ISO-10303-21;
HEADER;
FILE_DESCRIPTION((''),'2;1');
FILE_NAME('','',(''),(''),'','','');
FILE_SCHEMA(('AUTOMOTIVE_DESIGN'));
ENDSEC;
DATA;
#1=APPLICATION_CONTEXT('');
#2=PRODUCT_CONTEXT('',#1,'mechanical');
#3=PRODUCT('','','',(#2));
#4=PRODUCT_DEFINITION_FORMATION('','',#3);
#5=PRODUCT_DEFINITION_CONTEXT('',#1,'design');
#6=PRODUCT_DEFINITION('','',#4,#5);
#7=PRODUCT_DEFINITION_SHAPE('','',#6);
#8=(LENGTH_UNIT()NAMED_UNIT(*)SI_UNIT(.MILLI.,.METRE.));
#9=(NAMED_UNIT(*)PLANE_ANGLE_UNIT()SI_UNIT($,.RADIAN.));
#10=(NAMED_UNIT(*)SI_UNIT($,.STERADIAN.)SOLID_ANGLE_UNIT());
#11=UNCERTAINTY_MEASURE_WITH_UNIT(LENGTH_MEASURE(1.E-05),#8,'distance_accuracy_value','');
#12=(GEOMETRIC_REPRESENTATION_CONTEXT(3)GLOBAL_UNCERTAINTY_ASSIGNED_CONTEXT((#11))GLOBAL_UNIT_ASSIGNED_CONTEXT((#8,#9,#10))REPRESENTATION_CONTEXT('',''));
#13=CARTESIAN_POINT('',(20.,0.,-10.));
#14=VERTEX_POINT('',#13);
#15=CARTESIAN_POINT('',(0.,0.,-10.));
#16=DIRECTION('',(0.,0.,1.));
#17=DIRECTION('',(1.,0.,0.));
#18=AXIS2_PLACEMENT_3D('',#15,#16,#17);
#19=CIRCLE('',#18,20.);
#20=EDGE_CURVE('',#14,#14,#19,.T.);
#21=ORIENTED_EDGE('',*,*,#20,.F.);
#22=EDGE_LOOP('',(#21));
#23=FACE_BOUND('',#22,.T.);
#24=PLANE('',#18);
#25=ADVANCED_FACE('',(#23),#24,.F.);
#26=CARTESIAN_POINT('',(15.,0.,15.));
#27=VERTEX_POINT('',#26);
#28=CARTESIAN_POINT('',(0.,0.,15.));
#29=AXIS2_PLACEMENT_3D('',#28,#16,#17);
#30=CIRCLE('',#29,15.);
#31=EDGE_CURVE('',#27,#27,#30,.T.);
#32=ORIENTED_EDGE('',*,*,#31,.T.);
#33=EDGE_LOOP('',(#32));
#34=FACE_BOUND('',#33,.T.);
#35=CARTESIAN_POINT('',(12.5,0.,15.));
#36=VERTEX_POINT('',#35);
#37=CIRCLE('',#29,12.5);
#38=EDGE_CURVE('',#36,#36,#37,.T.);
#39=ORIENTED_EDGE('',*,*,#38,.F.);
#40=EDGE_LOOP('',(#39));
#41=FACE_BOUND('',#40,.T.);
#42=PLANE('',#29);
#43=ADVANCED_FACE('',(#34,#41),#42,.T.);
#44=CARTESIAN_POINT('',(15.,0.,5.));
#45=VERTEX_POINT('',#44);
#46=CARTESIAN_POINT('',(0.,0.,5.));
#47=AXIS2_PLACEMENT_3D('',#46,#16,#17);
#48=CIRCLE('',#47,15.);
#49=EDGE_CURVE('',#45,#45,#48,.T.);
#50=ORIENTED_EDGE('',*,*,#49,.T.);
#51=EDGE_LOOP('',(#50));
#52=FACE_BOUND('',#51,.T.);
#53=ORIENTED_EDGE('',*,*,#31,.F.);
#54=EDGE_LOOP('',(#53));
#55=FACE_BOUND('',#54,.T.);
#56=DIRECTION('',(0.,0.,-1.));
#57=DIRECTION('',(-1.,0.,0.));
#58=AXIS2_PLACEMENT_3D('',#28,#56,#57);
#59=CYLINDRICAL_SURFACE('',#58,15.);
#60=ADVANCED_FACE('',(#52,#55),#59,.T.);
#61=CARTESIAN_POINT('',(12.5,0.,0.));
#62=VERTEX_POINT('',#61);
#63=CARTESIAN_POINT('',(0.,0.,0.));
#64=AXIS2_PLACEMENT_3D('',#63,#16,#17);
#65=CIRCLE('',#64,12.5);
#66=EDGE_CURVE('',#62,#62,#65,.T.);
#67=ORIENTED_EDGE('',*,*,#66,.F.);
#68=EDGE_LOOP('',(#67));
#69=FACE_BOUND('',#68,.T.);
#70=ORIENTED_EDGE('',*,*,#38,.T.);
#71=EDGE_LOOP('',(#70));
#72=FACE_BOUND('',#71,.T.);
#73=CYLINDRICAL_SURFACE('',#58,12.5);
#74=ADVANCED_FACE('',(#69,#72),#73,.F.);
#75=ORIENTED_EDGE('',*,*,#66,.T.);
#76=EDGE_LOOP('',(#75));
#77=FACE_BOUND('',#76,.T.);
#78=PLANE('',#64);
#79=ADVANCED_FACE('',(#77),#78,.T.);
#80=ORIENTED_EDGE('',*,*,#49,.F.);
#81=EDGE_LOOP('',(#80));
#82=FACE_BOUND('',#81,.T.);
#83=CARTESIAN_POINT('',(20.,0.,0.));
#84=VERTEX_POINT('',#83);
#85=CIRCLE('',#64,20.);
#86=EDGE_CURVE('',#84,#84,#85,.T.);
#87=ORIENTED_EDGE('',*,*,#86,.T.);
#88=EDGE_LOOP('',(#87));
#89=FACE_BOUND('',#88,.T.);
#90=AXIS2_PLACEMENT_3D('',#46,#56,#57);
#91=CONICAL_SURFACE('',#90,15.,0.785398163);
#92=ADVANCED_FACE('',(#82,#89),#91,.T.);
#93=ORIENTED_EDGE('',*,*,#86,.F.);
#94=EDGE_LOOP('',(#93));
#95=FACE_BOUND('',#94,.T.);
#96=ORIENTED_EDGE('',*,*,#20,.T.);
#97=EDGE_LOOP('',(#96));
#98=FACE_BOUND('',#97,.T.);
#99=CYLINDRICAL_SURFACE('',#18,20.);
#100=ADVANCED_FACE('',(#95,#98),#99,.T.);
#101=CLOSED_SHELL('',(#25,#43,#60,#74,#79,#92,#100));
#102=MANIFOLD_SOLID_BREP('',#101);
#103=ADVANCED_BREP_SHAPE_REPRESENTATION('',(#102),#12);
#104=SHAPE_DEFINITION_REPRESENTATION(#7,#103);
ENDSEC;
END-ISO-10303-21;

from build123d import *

# Parameters (mm, degrees)
SKETCH1_R           = 15
SKETCH1_R_2         = 12.5
BOSS_EXTRUDE1_DEPTH = 15
BOSS_EXTRUDE2_START = -10
SKETCH1_3_R         = 20
SKETCH1_3_R_2       = 15
SKETCH1_3_R_3       = 12.5
BOSS_EXTRUDE2_DEPTH = 10
CHAMFER1_SIZE       = 5


with BuildPart() as part:
    # Sketch1 → Boss-Extrude1 (new body)
    with BuildSketch(Plane.XY):
        Circle(SKETCH1_R)
        Circle(SKETCH1_R_2, mode=Mode.SUBTRACT)
    extrude(amount=BOSS_EXTRUDE1_DEPTH)

    # Sketch1<3> → Boss-Extrude2 (add)
    # profile 1 of 3: a face of its own
    with BuildSketch(Plane.XY.offset(BOSS_EXTRUDE2_START)):
        Circle(SKETCH1_3_R)
        Circle(SKETCH1_3_R_2, mode=Mode.SUBTRACT)
    # profile 2 of 3: a face of its own
    with BuildSketch(Plane.XY.offset(BOSS_EXTRUDE2_START)):
        Circle(SKETCH1_3_R_2)
        Circle(SKETCH1_3_R_3, mode=Mode.SUBTRACT)
    # profile 3 of 3: a face of its own
    with BuildSketch(Plane.XY.offset(BOSS_EXTRUDE2_START)):
        Circle(SKETCH1_3_R_3)
    extrude(amount=BOSS_EXTRUDE2_DEPTH)

    # Chamfer1
    chamfer1_edges = [part.edges().sort_by_distance(p)[0] for p in [
        (-15, 0, 0),
    ]]
    chamfer(chamfer1_edges, length=CHAMFER1_SIZE - 0.0001)  # a hair under: the kernel refuses the full size


solid = part.part
